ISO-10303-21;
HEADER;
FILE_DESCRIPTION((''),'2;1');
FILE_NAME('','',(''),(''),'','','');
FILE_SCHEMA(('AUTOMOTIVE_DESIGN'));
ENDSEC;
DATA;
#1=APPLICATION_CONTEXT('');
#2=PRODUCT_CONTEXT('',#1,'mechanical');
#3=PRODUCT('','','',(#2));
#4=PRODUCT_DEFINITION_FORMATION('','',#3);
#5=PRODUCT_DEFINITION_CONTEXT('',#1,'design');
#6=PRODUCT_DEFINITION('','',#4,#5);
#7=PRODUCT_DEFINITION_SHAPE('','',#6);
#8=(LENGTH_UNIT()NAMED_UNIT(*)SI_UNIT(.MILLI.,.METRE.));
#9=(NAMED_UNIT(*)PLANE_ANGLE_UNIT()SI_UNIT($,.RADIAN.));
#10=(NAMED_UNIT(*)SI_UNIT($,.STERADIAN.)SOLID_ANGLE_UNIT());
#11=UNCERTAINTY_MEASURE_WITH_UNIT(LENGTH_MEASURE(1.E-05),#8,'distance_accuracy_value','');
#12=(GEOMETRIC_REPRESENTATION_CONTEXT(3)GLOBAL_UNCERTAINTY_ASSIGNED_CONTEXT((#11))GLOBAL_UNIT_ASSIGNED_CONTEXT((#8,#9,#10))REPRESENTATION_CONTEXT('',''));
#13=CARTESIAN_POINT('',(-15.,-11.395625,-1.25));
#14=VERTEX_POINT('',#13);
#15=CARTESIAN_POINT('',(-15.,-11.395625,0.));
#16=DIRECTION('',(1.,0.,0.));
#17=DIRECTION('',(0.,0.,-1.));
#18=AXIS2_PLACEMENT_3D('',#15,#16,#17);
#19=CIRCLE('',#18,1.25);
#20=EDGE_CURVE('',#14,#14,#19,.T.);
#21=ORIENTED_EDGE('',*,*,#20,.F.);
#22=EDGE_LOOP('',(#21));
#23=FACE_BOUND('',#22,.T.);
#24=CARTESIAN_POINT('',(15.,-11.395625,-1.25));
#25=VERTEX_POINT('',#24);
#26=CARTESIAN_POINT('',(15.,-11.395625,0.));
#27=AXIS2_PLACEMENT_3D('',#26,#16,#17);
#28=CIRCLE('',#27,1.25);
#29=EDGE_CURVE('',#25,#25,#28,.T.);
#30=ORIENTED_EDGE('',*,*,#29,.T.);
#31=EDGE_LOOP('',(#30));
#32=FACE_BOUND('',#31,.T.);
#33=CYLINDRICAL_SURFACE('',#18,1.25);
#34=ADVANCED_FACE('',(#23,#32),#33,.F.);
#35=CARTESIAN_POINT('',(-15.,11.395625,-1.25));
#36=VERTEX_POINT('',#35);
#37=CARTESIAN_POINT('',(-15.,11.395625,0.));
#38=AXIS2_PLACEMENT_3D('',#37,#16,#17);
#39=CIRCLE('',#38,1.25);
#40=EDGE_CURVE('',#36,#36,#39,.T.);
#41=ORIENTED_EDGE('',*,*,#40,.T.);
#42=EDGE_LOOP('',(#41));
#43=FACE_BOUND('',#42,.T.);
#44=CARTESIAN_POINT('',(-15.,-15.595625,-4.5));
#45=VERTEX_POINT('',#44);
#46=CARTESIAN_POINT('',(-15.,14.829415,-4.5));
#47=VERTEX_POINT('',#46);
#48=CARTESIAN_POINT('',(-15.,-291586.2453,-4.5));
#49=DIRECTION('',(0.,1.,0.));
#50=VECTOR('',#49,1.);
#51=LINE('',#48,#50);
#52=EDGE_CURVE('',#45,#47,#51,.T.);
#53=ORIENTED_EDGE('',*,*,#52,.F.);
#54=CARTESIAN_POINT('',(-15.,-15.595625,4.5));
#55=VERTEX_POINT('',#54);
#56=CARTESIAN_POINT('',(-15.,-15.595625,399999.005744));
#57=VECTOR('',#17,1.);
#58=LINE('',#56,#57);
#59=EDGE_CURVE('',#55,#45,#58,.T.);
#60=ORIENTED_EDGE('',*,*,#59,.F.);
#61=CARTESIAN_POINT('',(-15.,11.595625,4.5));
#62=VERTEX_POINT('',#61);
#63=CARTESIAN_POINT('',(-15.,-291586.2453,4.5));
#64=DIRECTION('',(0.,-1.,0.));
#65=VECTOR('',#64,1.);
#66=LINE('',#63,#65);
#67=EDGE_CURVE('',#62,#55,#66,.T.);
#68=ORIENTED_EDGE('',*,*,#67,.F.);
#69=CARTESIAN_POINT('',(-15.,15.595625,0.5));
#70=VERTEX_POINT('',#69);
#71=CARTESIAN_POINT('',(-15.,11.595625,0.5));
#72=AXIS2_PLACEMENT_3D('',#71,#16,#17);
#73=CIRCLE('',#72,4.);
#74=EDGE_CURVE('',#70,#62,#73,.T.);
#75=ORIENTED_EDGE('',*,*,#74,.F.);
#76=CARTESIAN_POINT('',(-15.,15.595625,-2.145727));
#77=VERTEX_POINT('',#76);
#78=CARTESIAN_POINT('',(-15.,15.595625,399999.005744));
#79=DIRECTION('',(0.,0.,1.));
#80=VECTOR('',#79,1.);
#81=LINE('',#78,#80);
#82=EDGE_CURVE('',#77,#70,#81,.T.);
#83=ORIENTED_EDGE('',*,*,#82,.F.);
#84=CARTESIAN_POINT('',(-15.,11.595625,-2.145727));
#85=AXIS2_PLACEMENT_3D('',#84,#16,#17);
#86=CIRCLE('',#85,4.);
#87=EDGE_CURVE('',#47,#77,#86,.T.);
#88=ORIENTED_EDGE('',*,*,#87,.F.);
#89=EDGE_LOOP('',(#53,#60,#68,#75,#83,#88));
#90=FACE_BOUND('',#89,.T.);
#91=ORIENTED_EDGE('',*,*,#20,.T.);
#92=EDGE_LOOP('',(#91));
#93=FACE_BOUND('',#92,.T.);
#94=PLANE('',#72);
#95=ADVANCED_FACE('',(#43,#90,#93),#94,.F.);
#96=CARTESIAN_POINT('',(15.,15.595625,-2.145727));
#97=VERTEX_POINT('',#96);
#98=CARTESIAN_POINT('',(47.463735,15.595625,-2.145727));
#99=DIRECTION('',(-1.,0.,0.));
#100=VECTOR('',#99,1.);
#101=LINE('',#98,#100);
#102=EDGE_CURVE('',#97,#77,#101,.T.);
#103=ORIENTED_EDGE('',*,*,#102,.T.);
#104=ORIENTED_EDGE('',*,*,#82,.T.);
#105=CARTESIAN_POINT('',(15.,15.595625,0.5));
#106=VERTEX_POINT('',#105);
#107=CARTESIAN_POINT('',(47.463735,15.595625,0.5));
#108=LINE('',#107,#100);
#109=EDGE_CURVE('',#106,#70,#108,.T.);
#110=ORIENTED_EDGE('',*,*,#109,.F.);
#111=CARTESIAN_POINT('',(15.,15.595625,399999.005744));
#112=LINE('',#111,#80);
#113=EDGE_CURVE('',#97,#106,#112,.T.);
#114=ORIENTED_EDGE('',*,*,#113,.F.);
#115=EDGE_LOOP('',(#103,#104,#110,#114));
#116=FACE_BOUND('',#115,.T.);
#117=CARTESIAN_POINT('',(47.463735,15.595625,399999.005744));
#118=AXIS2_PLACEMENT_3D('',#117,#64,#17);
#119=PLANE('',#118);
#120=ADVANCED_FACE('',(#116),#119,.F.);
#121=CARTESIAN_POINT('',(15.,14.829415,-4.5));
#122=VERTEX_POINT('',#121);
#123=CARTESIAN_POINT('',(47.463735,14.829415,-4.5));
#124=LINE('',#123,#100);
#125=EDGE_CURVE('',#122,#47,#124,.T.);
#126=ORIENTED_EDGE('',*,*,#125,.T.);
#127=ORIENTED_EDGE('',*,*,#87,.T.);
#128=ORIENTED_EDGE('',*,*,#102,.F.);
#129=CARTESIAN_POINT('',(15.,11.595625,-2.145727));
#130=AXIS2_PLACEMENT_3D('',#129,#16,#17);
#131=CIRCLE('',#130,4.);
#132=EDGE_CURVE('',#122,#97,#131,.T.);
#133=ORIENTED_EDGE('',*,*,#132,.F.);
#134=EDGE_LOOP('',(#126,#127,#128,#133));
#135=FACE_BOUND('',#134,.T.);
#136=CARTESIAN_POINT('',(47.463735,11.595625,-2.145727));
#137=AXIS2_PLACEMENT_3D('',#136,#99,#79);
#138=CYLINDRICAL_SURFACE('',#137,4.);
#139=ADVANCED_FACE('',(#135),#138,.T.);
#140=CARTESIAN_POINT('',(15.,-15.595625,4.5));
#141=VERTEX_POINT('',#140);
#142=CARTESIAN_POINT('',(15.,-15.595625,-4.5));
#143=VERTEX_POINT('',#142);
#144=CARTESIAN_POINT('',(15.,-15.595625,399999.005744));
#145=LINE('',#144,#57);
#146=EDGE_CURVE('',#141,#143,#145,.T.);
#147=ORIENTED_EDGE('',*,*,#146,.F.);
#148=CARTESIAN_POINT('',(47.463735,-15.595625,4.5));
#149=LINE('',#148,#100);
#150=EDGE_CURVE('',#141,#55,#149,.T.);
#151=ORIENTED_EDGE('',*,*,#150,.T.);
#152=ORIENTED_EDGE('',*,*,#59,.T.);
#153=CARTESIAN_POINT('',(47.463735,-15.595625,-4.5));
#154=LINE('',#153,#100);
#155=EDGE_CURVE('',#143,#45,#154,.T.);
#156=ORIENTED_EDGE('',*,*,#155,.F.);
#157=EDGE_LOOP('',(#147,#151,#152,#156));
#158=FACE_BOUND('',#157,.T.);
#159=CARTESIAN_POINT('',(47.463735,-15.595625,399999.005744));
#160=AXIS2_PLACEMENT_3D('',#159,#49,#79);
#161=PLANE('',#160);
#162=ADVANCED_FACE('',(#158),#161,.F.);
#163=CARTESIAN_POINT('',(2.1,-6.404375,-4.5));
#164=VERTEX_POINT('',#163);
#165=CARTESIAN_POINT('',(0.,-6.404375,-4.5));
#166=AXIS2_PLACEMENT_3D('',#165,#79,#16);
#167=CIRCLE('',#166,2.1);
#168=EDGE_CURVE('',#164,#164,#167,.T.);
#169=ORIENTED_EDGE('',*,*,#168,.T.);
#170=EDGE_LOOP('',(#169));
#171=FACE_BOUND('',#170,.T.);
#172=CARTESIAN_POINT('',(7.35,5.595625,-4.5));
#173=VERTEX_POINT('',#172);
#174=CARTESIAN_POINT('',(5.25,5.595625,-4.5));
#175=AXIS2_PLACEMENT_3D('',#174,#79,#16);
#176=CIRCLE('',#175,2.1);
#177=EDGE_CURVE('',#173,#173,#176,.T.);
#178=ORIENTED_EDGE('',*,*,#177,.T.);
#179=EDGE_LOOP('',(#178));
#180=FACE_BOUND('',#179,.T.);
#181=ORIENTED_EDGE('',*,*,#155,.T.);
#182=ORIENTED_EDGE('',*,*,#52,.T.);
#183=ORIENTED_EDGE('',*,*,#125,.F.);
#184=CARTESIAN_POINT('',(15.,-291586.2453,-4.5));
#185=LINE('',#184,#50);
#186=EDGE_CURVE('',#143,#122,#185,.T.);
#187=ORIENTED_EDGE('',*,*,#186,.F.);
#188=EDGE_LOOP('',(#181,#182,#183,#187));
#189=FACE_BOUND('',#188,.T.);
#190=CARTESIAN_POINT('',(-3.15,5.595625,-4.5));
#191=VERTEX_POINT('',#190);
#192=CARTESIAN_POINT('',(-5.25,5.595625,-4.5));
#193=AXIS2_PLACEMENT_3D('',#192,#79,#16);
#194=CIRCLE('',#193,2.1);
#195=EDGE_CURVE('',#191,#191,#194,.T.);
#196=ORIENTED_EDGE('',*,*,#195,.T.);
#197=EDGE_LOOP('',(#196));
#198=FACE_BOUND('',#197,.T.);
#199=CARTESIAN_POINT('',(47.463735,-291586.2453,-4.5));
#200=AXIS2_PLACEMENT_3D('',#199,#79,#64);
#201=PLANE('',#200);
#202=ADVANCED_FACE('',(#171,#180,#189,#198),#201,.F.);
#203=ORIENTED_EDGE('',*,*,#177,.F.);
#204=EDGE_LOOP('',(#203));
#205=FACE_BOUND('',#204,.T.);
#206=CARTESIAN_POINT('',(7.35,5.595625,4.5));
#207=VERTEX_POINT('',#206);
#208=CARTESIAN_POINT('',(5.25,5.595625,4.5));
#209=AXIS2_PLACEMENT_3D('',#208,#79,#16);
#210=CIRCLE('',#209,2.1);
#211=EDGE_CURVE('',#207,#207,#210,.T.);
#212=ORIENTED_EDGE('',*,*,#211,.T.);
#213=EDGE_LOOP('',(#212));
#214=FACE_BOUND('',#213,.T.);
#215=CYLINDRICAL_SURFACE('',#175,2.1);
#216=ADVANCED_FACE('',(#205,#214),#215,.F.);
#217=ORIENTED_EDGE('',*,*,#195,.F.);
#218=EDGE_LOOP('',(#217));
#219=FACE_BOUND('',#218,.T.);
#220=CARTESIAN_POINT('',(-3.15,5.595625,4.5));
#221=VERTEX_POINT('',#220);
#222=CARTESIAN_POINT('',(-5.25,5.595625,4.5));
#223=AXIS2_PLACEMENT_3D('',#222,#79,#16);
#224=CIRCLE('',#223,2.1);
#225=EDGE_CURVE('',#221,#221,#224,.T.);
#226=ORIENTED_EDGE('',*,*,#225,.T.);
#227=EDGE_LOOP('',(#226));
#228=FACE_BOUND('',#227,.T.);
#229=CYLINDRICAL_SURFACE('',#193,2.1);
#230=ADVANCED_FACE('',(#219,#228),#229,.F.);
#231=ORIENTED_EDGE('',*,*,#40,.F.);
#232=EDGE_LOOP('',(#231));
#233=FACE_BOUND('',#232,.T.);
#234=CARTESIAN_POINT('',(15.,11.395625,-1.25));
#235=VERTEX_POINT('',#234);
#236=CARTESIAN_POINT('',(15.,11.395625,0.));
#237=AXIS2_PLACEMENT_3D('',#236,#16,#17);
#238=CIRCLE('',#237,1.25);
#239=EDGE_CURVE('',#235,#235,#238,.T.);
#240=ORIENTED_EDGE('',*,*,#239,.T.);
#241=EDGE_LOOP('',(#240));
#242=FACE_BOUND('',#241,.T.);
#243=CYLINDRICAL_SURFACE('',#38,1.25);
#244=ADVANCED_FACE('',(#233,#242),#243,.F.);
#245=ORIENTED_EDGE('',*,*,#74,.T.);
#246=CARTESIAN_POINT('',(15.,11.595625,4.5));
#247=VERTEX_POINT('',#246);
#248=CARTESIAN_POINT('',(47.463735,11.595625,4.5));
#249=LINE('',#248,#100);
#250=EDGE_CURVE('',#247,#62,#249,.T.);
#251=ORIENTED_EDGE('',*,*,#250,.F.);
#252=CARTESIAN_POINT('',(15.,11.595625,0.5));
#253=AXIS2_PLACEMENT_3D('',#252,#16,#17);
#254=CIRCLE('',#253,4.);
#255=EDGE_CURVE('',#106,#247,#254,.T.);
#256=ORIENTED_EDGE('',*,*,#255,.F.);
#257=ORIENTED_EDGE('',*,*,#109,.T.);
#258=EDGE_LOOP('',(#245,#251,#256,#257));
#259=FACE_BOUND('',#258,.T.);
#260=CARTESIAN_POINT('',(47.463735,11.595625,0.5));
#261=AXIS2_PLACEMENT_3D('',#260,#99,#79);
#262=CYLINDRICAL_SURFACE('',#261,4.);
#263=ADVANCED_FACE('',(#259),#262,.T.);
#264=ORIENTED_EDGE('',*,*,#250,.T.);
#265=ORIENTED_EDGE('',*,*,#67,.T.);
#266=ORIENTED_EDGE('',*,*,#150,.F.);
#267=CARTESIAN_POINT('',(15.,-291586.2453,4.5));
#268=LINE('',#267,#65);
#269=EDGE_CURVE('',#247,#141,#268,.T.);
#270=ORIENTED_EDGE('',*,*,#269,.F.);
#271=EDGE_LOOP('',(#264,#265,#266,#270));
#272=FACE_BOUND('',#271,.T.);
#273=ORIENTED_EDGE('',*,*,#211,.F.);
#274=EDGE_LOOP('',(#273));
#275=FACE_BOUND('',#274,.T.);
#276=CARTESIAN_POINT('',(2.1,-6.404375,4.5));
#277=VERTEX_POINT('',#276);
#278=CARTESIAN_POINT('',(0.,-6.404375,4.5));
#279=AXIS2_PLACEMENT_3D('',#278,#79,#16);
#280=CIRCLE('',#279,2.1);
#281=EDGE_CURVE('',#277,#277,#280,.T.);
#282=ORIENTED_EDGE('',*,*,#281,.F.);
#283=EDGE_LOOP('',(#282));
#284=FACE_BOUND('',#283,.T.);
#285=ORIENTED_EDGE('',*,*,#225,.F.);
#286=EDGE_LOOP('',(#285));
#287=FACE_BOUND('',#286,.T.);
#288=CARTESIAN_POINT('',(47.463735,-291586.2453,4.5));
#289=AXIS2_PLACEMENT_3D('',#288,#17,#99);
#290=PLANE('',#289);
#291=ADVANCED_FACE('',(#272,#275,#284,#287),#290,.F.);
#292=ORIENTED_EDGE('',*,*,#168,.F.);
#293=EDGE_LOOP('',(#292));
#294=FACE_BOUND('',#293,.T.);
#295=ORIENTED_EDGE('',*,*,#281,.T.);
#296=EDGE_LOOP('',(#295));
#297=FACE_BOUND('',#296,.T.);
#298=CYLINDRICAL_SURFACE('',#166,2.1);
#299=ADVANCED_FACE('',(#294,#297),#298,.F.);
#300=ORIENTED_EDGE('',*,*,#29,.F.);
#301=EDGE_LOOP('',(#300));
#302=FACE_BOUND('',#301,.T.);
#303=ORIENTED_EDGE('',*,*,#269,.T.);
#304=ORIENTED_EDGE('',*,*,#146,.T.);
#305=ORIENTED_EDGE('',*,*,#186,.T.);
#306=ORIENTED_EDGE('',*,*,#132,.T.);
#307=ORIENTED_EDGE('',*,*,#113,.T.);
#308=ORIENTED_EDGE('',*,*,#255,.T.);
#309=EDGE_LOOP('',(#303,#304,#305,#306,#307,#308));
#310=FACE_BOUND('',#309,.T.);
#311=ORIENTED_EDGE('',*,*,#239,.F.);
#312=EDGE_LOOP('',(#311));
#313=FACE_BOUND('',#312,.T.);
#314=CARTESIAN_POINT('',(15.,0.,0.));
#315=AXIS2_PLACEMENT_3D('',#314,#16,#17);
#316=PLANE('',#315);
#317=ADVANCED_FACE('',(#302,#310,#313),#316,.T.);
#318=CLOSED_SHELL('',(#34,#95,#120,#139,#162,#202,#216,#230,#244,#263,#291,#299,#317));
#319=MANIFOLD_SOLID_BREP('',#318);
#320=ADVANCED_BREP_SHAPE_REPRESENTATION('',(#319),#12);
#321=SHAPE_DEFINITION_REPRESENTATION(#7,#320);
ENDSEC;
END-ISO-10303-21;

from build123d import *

# Parameters (mm, degrees)
MAINBODY_EXTRUDE_START                     = -15
MAINBODY_EXTRUDE_DEPTH                     = 30
VISESCREWSTHREADEDHOLES_CUT_DEPTH          = 23.101437038
VISESCREWSTHREADEDHOLES_CUT_DEPTH_BACK     = 23.101437038
VISESCREWSTHREADEDHOLES_SKETCH_R           = 2.1
CUT_EXTRUDE2_DEPTH                         = 24.435518325
CUT_EXTRUDE2_DEPTH_BACK                    = 19.935518325
CUT_EXTRUDE2_START                         = -4.5
THREADEDHOLEFORTERMINALSCREW_SKETCH_R      = 2.1
MOUNTINGHOLETOSIDEPLATESEEDFODDER_START    = -2.145727099
MOUNTINGHOLETOSIDEPLATESEEDFODDER_OUTLIN_W = 30
MOUNTINGHOLETOSIDEPLATESEEDFODDER_OUTLIN_H = 31.19125
MOUNTINGHOLETOSIDEPLATESEEDFODDER_OUTLIN_R = 2.1
MOUNTINGHOLETOSIDEPLATESEEDFODDER_DEPTH    = 2.645727099
MOUNTINGHOLETOSIDEPLATESEEDFODDER_START_2  = -15
MOUNTINGHOLETOSIDEPLATESEEDFODDER_2_DEPTH  = 30
MOUNTINGHOLETOSIDEPLATESEEDFODDER_START_3  = -4.5
MOUNTINGHOLETOSIDEPLATESEEDFODDER_3_OUTL_R = 2.1
MOUNTINGHOLETOSIDEPLATESEEDFODDER_3_DEPTH  = 9
MOUNTINGHOLETOSIDEPLATESEED_SKETCH_R       = 1.25
MOUNTINGHOLETOSIDEPLATESEED_CUT_DEPTH      = 23.101437038
MOUNTINGHOLESTOSIDEPLATE_PATTERN_START     = -15
MOUNTINGHOLESTOSIDEPLATE_PATTERN_OUTLINE_R = 1.25
MOUNTINGHOLESTOSIDEPLATE_PATTERN_DEPTH     = 30


with BuildPart() as part:
    # projectionX_sketch → mainBody_extrude (new body)
    with BuildSketch(Plane(origin=(0, 0, 0), x_dir=(0, 0, -1), z_dir=(1, 0, 0)).offset(MAINBODY_EXTRUDE_START)):
        with BuildLine():
            Line((-0.5, 15.595625), (2.145727099, 15.595625))
            ThreePointArc((2.145727099, 15.595625), (3.383636459, 15.399252271), (4.5, 14.829415207))
            Line((4.5, 14.829415207), (4.5, -15.595625))
            Line((4.5, -15.595625), (-4.5, -15.595625))
            Line((-4.5, -15.595625), (-4.5, 11.595625))
            ThreePointArc((-4.5, 11.595625), (-3.328427125, 14.424052125), (-0.5, 15.595625))
        make_face()
    extrude(amount=MAINBODY_EXTRUDE_DEPTH)

    # viseScrewsThreadedHoles_sketch → viseScrewsThreadedHoles_cut (cut, two sides: drawn at the far end of the back side and taken through both)
    with BuildSketch(Plane.XY.offset(-VISESCREWSTHREADEDHOLES_CUT_DEPTH_BACK)):
        with Locations((-5.25, 5.595625)):
            Circle(VISESCREWSTHREADEDHOLES_SKETCH_R)
        with Locations((5.25, 5.595625)):
            Circle(VISESCREWSTHREADEDHOLES_SKETCH_R)
    extrude(amount=VISESCREWSTHREADEDHOLES_CUT_DEPTH + VISESCREWSTHREADEDHOLES_CUT_DEPTH_BACK, mode=Mode.SUBTRACT)

    # threadedHoleForTerminalScrew_sketch → Cut-Extrude2 (cut, two sides: drawn at the far end of the back side and taken through both)
    with BuildSketch(Plane.XY.offset(4.5).offset(CUT_EXTRUDE2_START - CUT_EXTRUDE2_DEPTH_BACK)):
        with Locations((0, -6.404375)):
            Circle(THREADEDHOLEFORTERMINALSCREW_SKETCH_R)
    extrude(amount=CUT_EXTRUDE2_DEPTH + CUT_EXTRUDE2_DEPTH_BACK, mode=Mode.SUBTRACT)

    # mountingHolesToSidePlate_pattern: read off the stored shape, not the designer's step
    # mountingHolesToSidePlate_pattern outline → mountingHolesToSidePlate_pattern (cut)
    with BuildSketch(Plane.YZ.offset(MOUNTINGHOLESTOSIDEPLATE_PATTERN_START)):
        with Locations((-11.395625, 0)):
            Circle(MOUNTINGHOLESTOSIDEPLATE_PATTERN_OUTLINE_R)
        with Locations((11.395625, 0)):
            Circle(MOUNTINGHOLESTOSIDEPLATE_PATTERN_OUTLINE_R)
    extrude(amount=MOUNTINGHOLESTOSIDEPLATE_PATTERN_DEPTH, mode=Mode.SUBTRACT)


with BuildPart() as body_2:
    # mountingHoleToSidePlateSeedFodder: read off the stored shape, not the designer's step
    # mountingHoleToSidePlateSeedFodder outlin → mountingHoleToSidePlateSeedFodder (new body)
    with BuildSketch(Plane.XY.offset(MOUNTINGHOLETOSIDEPLATESEEDFODDER_START)):
        Rectangle(MOUNTINGHOLETOSIDEPLATESEEDFODDER_OUTLIN_W, MOUNTINGHOLETOSIDEPLATESEEDFODDER_OUTLIN_H)
        with Locations((0, -6.404375)):
            Circle(MOUNTINGHOLETOSIDEPLATESEEDFODDER_OUTLIN_R, mode=Mode.SUBTRACT)
        with Locations((-5.25, 5.595625)):
            Circle(MOUNTINGHOLETOSIDEPLATESEEDFODDER_OUTLIN_R, mode=Mode.SUBTRACT)
        with Locations((5.25, 5.595625)):
            Circle(MOUNTINGHOLETOSIDEPLATESEEDFODDER_OUTLIN_R, mode=Mode.SUBTRACT)
    extrude(amount=MOUNTINGHOLETOSIDEPLATESEEDFODDER_DEPTH)

    # mountingHoleToSidePlateSeedFodder 2 outl → mountingHoleToSidePlateSeedFodder 2 (add)
    with BuildSketch(Plane.YZ.offset(MOUNTINGHOLETOSIDEPLATESEEDFODDER_START_2)):
        with BuildLine():
            Line((15.595625, -2.145727099), (-15.595625, -2.145727099))
            Line((-15.595625, -2.145727099), (-15.595625, -4.5))
            Line((-15.595625, -4.5), (14.829415207, -4.5))
            ThreePointArc((14.829415207, -4.5), (15.399252271, -3.38363646), (15.595625, -2.145727099))
        make_face()
        with BuildLine():
            ThreePointArc((15.595625, 0.5), (14.424052125, 3.328427125), (11.595625, 4.5))
            Line((11.595625, 4.5), (-15.595625, 4.5))
            Line((-15.595625, 4.5), (-15.595625, 0.5))
            Line((-15.595625, 0.5), (15.595625, 0.5))
        make_face()
    extrude(amount=MOUNTINGHOLETOSIDEPLATESEEDFODDER_2_DEPTH)

    # mountingHoleToSidePlateSeedFodder 3 outl → mountingHoleToSidePlateSeedFodder 3 (cut)
    with BuildSketch(Plane.XY.offset(MOUNTINGHOLETOSIDEPLATESEEDFODDER_START_3)):
        with Locations((5.25, 5.595625)):
            Circle(MOUNTINGHOLETOSIDEPLATESEEDFODDER_3_OUTL_R)
        with Locations((-5.25, 5.595625)):
            Circle(MOUNTINGHOLETOSIDEPLATESEEDFODDER_3_OUTL_R)
        with Locations((0, -6.404375)):
            Circle(MOUNTINGHOLETOSIDEPLATESEEDFODDER_3_OUTL_R)
    extrude(amount=MOUNTINGHOLETOSIDEPLATESEEDFODDER_3_DEPTH, mode=Mode.SUBTRACT)

    # mountingHoleToSidePlateSeed_sketch → mountingHoleToSidePlateSeed_cut (cut, symmetric)
    with BuildSketch(Plane(origin=(0, 0, 0), x_dir=(0, 0, -1), z_dir=(1, 0, 0))):
        Circle(MOUNTINGHOLETOSIDEPLATESEED_SKETCH_R)
    extrude(amount=MOUNTINGHOLETOSIDEPLATESEED_CUT_DEPTH, both=True, mode=Mode.SUBTRACT)


solid = part.part
